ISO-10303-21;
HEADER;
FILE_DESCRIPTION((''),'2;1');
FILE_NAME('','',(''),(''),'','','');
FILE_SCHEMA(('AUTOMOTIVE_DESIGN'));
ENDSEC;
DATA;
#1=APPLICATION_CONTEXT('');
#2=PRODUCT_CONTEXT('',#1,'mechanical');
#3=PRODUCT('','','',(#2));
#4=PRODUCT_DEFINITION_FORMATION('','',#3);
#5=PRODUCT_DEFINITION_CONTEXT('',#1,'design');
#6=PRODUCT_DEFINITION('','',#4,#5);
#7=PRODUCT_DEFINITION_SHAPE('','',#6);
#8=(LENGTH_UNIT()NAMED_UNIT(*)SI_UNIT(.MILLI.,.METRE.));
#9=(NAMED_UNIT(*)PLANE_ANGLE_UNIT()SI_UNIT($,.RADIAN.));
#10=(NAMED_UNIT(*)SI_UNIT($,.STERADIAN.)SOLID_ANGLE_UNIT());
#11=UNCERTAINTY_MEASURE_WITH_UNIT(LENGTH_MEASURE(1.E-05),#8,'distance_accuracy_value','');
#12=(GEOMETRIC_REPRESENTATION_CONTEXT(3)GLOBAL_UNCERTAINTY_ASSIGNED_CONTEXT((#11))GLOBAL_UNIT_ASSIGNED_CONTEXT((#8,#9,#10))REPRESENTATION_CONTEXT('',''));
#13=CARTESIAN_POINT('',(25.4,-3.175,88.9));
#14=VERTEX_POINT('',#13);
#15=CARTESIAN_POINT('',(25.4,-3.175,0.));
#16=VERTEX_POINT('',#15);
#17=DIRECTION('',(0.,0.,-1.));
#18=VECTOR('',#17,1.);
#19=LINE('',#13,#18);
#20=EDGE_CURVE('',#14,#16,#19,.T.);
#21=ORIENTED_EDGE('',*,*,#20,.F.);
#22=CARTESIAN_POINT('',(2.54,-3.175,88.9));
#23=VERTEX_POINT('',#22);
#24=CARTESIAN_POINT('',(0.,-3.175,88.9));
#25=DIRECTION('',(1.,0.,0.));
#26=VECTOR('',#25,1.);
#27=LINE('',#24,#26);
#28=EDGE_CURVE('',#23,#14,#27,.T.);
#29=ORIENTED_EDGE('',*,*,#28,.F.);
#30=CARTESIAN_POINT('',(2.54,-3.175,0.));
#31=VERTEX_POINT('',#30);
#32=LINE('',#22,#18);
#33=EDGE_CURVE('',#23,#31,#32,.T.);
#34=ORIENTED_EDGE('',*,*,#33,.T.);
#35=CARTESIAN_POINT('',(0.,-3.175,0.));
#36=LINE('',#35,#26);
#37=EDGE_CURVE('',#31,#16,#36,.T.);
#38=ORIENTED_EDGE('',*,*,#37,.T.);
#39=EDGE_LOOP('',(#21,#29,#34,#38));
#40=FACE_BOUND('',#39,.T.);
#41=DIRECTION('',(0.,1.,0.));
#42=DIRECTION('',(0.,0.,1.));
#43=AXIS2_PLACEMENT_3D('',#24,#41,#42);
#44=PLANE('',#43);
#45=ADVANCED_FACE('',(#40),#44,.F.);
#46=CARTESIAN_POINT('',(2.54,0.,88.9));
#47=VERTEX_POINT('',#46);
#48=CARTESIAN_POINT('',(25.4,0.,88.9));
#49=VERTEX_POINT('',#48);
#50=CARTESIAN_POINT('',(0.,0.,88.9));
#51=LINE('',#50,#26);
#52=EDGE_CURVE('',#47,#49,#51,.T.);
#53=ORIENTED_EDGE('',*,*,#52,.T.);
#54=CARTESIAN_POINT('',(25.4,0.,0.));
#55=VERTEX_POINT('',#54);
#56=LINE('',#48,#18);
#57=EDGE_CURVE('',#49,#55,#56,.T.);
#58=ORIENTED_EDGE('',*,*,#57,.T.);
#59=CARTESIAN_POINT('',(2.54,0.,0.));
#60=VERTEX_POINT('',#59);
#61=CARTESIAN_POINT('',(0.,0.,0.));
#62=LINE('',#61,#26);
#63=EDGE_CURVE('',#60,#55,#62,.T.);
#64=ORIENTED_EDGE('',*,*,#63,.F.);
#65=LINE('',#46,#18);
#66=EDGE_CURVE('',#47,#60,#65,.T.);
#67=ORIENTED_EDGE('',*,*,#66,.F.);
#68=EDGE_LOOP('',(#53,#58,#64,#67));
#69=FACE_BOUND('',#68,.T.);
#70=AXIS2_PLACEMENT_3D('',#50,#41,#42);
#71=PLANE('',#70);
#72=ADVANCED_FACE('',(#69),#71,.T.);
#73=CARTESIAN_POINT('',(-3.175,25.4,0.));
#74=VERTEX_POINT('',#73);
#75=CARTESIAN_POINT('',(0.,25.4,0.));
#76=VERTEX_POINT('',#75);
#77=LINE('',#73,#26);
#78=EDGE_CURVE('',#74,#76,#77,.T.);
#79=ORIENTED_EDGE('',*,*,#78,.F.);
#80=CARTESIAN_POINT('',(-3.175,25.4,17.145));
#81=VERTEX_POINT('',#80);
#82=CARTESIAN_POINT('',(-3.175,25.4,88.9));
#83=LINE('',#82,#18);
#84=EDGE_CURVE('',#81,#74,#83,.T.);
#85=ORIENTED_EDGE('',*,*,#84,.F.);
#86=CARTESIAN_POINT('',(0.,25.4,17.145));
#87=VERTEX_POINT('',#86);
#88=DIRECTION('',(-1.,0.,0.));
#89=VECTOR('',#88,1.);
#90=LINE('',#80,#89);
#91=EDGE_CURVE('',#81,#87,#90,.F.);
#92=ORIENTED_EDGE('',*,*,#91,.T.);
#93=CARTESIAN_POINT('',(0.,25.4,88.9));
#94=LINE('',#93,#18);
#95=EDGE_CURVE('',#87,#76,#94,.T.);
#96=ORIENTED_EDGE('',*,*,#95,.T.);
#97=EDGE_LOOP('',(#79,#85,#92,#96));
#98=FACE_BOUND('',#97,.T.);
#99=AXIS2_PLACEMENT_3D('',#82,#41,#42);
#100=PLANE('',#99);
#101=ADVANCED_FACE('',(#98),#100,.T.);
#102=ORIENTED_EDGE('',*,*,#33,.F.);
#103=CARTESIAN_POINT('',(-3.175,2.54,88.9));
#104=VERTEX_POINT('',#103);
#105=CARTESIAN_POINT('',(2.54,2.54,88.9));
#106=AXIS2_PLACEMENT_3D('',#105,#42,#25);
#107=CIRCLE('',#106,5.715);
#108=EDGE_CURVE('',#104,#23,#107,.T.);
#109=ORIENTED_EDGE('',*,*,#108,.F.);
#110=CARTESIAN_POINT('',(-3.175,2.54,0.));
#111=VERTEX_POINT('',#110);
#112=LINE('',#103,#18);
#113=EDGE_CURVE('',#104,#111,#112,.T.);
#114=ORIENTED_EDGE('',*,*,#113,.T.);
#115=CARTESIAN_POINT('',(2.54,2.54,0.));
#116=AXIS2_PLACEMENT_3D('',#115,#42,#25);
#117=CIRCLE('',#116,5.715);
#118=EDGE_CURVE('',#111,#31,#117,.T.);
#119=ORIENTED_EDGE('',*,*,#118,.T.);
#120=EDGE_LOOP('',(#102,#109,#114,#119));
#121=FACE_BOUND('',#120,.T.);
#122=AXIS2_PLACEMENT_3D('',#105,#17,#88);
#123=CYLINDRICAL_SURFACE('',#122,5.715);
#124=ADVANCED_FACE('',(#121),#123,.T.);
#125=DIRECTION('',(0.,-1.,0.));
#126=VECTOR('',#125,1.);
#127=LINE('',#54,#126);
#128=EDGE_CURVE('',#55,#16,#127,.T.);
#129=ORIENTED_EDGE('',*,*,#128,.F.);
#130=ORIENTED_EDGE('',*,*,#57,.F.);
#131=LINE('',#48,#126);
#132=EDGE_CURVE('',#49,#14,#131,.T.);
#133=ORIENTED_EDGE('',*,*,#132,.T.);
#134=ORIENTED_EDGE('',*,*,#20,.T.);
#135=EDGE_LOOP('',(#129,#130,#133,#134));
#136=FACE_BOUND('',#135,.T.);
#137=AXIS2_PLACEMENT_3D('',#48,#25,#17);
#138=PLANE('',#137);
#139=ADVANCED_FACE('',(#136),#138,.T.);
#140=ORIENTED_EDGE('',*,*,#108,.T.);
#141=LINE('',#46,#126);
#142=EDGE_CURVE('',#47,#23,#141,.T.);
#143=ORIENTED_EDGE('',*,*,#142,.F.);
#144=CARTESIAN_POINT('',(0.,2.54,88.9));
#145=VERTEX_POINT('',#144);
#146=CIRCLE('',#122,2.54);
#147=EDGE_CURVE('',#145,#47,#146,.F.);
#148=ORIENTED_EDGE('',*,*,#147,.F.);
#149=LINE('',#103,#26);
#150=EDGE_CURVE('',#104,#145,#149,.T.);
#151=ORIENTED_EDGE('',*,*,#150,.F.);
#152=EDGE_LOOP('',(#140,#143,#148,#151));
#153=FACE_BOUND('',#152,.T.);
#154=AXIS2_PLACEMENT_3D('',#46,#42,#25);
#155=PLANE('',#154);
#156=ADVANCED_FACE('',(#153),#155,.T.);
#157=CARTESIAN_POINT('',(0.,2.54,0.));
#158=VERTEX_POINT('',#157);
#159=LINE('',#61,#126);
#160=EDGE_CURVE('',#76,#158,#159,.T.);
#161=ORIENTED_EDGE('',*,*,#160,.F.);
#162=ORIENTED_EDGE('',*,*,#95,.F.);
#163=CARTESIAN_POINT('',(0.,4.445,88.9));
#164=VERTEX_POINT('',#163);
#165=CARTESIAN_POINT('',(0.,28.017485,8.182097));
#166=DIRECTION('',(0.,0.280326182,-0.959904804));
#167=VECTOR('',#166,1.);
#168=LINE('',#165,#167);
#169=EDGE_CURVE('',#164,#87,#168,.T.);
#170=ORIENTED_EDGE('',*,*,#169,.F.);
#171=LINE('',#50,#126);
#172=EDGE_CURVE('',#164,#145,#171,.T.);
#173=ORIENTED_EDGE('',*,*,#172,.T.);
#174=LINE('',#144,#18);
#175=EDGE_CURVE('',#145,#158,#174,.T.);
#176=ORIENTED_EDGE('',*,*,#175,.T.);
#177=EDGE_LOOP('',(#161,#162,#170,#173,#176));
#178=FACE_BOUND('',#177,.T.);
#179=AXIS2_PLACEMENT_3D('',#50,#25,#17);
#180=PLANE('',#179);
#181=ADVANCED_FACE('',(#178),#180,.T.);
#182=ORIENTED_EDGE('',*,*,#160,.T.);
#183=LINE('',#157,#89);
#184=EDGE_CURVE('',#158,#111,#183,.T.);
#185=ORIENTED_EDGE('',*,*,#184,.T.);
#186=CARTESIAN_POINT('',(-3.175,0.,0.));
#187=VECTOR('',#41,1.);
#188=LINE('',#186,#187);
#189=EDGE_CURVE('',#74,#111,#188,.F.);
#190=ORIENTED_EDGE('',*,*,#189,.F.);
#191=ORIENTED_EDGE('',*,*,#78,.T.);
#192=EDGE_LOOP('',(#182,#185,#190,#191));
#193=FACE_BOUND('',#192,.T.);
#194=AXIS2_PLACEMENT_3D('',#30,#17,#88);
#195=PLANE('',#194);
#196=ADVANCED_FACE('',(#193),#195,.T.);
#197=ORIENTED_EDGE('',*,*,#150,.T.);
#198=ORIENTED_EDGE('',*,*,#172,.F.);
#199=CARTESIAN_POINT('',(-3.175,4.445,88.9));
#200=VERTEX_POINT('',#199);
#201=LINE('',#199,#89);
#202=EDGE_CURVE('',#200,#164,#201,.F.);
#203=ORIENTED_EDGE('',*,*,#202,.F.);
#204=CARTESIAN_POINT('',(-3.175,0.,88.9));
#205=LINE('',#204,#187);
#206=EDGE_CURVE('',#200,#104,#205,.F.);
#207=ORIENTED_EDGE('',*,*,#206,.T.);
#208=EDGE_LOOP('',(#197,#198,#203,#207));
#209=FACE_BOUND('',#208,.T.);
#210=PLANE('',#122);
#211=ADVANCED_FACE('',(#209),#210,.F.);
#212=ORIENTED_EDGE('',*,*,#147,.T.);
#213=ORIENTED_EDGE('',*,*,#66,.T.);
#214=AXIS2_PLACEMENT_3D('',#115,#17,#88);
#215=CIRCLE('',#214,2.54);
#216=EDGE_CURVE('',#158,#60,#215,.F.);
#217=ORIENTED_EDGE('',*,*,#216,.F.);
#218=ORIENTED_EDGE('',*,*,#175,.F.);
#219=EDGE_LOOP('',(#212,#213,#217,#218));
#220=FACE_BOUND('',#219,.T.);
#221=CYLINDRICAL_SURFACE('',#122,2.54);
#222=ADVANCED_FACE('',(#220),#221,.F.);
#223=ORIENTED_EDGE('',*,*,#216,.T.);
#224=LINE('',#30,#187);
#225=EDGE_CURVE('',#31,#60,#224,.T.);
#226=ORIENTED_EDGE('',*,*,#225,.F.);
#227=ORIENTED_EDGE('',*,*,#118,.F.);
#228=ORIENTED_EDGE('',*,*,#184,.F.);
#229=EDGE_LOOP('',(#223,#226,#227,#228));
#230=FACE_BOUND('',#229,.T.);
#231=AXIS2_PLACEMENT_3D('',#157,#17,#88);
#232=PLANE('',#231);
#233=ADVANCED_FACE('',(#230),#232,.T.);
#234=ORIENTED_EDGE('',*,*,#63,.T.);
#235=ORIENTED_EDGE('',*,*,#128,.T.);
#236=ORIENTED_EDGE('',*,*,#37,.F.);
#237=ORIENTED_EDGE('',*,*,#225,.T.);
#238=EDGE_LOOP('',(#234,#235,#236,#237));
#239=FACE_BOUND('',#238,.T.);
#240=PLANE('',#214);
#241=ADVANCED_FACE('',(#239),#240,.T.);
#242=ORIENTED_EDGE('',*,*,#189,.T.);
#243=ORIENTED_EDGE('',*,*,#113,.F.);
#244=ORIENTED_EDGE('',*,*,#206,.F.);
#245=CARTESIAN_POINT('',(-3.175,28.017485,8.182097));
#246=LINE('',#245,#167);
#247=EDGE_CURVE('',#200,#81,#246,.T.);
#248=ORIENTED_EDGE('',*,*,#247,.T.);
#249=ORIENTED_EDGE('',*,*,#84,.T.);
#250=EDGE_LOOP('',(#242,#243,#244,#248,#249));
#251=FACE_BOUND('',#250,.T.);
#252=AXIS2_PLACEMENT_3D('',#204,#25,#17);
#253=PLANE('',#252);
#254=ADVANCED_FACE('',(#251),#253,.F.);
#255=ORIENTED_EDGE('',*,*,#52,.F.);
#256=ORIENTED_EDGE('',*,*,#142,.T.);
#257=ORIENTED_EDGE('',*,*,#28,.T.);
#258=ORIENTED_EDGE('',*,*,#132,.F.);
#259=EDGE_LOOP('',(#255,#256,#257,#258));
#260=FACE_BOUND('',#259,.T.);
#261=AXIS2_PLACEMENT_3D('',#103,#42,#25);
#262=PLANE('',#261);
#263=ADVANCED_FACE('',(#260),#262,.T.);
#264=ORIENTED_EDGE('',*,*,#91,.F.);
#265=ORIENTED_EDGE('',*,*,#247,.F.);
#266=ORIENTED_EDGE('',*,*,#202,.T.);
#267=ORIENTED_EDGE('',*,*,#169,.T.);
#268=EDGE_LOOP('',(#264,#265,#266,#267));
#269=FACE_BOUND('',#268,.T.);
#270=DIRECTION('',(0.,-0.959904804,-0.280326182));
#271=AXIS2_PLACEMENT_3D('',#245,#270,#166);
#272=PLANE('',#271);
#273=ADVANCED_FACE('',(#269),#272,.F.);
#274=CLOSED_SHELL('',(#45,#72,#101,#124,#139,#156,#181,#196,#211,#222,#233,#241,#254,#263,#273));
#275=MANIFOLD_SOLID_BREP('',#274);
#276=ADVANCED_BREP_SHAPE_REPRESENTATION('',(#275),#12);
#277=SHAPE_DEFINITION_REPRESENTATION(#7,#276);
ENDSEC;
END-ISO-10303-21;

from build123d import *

# Parameters (mm, degrees)
BASE_FLANGE1_DEPTH = 88.9
CUT_EXTRUDE1_DEPTH = 3.175


# Read off the part's stored shape, not the designer's step: Base-Flange1
with BuildPart() as part:
    # Base-Flange1 outline → Base-Flange1 (new body)
    with BuildSketch(Plane.XY):
        with BuildLine():
            Line((2.54, -3.175), (25.4, -3.175))
            Line((25.4, -3.175), (25.4, 0))
            Line((25.4, 0), (2.54, 0))
            ThreePointArc((2.54, 0), (0.743948776, 0.743948776), (0, 2.54))
            Line((0, 2.54), (0, 25.4))
            Line((0, 25.4), (-3.175, 25.4))
            Line((-3.175, 25.4), (-3.175, 2.54))
            ThreePointArc((-3.175, 2.54), (-1.501115254, -1.501115254), (2.54, -3.175))
        make_face()
    extrude(amount=BASE_FLANGE1_DEPTH)

    # Sketch2 → Cut-Extrude1 (cut)
    with BuildSketch(Plane(origin=(0, 0, 0), x_dir=(0, 0, -1), z_dir=(1, 0, 0))):
        Polygon((-88.9, 25.4), (-88.9, 4.445), (-17.145, 25.4), align=None)
    extrude(amount=-CUT_EXTRUDE1_DEPTH, mode=Mode.SUBTRACT)


solid = part.part
